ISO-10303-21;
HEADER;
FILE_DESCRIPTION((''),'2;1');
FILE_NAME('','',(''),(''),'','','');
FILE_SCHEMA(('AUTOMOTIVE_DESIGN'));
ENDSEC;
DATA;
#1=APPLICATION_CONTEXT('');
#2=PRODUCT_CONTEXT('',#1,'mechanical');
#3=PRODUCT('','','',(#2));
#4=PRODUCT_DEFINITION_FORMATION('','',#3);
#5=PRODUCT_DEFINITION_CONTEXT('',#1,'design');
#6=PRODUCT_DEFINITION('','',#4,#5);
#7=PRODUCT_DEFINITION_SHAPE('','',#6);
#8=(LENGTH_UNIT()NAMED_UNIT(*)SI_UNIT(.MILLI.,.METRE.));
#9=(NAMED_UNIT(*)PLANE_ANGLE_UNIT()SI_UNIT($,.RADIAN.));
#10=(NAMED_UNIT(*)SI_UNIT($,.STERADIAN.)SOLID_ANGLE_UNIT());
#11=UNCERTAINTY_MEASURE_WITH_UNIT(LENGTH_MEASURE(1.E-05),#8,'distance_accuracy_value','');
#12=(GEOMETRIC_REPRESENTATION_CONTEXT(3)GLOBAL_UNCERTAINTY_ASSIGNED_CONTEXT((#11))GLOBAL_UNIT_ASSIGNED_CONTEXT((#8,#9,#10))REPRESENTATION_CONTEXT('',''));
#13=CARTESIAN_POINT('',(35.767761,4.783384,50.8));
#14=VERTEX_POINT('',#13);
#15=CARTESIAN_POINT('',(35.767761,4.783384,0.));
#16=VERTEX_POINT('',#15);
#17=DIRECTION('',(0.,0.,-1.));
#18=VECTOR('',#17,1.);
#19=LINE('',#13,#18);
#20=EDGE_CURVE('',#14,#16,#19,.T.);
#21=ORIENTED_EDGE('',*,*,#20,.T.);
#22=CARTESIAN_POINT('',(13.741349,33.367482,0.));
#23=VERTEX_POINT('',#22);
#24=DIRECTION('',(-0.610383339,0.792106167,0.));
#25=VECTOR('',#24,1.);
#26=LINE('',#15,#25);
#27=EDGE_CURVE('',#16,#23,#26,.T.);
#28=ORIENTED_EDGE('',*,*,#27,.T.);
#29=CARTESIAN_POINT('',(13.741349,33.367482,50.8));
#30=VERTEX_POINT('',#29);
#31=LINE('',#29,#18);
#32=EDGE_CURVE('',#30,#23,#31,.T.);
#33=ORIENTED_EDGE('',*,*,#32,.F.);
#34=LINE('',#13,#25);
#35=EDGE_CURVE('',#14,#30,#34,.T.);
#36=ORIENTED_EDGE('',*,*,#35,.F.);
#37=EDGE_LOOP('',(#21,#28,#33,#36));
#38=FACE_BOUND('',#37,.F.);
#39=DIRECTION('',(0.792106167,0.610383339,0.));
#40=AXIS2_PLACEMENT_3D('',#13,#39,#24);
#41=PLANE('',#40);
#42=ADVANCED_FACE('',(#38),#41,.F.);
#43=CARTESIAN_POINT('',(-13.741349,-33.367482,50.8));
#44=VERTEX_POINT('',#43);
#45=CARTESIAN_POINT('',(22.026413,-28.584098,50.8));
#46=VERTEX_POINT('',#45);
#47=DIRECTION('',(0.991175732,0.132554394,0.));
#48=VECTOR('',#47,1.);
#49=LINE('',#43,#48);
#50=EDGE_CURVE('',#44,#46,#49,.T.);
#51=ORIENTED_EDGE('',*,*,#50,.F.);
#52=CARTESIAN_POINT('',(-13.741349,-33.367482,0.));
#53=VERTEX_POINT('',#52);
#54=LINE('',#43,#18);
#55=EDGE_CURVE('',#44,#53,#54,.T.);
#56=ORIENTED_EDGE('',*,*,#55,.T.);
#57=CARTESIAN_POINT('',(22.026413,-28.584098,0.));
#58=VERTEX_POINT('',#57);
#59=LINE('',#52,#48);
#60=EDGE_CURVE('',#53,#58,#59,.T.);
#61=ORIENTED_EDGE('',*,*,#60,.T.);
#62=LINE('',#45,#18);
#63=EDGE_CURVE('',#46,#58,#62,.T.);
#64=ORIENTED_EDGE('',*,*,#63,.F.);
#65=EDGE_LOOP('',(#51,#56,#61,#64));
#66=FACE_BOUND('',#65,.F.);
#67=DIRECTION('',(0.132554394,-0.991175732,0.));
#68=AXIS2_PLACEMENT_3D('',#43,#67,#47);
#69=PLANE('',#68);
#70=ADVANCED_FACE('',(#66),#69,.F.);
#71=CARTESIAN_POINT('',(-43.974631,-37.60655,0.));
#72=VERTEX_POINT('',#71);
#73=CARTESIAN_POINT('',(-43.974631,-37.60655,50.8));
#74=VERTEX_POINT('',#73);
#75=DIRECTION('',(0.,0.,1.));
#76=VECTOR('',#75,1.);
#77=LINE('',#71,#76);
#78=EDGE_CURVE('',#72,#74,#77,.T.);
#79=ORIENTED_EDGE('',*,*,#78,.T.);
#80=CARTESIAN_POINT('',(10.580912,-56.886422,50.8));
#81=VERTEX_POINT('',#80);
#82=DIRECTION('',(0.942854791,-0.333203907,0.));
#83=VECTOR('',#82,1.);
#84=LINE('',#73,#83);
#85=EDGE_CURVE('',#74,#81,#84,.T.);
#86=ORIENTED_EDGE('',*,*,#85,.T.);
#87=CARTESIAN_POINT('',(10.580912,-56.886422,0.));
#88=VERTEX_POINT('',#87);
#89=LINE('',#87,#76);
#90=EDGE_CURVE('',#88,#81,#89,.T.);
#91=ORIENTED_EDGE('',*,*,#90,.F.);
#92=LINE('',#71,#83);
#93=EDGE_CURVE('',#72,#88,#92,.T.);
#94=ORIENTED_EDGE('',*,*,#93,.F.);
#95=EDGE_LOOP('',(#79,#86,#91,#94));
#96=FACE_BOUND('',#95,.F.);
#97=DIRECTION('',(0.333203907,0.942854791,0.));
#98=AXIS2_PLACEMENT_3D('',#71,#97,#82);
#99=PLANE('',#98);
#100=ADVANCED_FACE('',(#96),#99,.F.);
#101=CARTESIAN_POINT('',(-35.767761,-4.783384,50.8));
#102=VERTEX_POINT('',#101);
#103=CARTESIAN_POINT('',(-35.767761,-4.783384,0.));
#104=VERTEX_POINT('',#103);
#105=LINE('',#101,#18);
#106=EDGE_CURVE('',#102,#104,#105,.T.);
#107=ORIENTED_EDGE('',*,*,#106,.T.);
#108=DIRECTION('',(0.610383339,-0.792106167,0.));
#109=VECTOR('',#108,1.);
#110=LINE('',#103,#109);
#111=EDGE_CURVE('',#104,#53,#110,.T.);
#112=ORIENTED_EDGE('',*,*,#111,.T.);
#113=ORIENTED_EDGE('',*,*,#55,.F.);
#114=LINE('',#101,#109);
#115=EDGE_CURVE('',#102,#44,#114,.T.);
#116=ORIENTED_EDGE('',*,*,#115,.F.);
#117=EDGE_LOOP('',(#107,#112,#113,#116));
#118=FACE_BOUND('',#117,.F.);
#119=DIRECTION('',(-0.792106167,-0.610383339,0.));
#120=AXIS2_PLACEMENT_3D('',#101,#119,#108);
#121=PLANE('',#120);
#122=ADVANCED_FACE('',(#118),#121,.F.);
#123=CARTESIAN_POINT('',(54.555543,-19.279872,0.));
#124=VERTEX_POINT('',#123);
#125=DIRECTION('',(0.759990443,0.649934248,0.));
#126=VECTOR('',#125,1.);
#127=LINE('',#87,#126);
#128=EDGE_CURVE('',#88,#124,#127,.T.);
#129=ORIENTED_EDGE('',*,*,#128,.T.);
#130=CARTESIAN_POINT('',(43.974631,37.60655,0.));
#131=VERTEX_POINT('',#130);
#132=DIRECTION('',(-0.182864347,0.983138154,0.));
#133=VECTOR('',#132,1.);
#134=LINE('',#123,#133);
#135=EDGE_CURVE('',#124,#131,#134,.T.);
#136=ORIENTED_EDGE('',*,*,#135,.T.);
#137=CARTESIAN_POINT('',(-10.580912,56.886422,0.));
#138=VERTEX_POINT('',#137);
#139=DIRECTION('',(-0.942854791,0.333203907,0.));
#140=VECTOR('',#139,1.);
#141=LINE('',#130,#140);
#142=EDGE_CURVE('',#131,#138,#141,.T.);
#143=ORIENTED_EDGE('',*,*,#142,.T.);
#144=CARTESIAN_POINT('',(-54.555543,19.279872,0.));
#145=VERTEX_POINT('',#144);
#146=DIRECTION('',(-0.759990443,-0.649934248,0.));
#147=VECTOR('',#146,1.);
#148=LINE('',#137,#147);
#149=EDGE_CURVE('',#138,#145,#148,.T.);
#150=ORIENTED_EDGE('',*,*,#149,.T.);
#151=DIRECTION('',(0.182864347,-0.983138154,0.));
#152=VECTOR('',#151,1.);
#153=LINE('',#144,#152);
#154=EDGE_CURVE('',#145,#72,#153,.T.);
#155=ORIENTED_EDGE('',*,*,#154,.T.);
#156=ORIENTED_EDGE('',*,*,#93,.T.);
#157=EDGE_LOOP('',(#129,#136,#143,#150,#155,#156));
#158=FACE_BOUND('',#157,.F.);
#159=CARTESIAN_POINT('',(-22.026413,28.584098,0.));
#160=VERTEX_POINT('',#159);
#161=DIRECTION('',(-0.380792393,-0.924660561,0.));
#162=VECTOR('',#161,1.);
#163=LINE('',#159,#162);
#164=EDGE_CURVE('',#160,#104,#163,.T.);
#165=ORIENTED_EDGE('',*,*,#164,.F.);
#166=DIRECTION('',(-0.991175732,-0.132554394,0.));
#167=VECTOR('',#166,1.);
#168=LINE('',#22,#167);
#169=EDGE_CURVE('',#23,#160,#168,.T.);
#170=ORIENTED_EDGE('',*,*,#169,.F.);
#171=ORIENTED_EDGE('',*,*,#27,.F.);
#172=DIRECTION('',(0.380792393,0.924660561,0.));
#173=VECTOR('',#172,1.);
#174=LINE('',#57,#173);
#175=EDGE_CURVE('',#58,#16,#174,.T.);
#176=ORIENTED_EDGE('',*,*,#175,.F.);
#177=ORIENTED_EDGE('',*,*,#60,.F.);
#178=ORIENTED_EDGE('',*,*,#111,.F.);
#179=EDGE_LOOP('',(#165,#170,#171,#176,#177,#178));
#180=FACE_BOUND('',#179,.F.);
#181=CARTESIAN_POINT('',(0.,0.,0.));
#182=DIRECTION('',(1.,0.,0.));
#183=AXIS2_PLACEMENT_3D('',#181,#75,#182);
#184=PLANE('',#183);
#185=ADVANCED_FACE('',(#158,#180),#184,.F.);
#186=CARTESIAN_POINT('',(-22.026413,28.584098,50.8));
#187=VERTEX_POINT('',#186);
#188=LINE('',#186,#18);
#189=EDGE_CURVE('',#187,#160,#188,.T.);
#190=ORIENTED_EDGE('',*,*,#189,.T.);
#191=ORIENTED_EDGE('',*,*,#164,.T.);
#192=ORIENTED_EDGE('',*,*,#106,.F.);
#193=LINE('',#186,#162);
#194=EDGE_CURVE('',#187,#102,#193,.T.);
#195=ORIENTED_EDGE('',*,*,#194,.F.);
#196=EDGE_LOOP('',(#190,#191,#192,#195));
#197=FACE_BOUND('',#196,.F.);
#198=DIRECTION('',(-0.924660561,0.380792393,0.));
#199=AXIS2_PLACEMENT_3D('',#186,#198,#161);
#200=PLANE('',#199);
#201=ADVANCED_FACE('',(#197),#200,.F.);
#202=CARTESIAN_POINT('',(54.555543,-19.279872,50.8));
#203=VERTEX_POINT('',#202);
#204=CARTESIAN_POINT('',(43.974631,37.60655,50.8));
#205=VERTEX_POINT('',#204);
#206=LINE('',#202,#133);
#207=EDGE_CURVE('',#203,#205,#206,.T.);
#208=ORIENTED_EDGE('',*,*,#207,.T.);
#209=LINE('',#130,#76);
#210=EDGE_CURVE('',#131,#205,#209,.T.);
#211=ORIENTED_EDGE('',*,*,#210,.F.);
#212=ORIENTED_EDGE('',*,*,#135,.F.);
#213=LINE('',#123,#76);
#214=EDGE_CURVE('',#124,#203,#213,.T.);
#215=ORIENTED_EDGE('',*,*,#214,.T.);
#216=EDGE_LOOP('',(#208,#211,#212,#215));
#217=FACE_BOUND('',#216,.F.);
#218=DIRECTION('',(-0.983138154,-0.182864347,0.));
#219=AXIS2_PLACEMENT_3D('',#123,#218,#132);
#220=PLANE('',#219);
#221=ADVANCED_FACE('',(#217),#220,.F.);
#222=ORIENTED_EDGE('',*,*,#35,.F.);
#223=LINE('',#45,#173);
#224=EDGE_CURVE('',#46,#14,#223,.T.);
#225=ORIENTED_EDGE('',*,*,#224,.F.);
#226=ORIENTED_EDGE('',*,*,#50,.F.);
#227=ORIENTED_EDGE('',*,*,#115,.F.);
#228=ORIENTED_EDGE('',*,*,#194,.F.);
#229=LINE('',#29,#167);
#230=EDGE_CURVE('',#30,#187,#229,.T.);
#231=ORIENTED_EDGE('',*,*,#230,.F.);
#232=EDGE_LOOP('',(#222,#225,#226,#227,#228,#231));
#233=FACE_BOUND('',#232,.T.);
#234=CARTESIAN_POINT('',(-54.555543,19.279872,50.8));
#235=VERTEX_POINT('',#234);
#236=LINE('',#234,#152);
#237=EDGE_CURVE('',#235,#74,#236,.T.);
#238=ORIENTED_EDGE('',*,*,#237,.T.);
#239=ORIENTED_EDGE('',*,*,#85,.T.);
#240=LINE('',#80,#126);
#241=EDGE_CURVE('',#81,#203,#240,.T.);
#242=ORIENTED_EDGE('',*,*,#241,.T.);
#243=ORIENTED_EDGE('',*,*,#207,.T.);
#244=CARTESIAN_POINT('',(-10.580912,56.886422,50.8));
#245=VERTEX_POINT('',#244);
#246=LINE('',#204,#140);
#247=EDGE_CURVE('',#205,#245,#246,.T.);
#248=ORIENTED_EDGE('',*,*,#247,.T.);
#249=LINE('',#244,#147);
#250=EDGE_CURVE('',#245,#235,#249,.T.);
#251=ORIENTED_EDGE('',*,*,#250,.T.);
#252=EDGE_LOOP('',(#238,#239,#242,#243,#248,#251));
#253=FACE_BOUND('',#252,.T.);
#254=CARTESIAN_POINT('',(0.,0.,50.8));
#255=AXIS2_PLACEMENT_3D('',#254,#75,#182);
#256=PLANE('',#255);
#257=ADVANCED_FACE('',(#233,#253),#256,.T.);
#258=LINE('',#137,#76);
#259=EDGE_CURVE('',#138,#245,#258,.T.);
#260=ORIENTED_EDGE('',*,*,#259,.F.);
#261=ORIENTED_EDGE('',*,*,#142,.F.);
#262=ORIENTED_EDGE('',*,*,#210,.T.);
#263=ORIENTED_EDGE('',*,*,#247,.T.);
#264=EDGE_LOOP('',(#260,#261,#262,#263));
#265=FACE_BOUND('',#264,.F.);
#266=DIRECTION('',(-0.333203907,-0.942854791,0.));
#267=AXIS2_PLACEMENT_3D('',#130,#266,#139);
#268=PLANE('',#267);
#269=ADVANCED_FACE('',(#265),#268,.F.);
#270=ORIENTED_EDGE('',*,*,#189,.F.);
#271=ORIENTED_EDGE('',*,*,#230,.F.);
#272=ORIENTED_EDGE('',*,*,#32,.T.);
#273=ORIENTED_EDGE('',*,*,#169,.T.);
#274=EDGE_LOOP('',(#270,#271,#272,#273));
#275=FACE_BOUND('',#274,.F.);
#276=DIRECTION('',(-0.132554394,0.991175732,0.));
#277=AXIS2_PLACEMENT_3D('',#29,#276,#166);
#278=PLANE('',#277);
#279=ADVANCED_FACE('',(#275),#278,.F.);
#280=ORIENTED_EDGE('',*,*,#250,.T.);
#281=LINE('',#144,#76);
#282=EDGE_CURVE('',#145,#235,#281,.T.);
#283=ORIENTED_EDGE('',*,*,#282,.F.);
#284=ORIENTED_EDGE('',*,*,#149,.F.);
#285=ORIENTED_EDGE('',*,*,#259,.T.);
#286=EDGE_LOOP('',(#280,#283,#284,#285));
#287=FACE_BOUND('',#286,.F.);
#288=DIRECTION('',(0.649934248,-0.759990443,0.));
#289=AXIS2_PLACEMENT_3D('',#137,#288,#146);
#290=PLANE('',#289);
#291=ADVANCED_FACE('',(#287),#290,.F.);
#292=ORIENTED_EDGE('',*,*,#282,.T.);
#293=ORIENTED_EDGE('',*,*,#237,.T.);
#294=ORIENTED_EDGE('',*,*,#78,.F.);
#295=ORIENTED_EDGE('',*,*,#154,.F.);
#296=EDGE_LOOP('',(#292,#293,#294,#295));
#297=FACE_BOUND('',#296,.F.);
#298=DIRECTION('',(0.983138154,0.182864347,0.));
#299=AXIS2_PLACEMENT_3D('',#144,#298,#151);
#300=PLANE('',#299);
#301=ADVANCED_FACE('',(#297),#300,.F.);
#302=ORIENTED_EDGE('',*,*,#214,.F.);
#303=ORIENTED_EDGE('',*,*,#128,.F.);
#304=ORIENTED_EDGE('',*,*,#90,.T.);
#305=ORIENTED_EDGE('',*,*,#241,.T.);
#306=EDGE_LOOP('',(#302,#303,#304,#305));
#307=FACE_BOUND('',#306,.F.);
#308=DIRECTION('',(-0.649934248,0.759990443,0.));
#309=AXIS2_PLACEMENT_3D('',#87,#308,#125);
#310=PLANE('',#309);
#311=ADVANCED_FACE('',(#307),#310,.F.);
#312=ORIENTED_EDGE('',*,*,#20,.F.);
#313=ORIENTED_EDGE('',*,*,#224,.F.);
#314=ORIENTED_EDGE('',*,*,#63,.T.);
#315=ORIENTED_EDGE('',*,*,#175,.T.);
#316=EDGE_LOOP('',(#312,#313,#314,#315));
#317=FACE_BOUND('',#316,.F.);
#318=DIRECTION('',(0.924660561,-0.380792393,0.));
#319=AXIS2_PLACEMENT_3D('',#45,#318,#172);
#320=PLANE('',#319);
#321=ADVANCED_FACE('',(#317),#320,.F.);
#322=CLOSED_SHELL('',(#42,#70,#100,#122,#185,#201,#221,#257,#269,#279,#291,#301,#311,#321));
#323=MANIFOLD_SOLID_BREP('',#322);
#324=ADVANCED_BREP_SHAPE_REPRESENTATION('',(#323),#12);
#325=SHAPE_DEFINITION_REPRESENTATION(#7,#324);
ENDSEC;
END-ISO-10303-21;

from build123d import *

# Parameters (mm, degrees)
F1_DEPTH = 50.8
F3_DEPTH = 50.8


# Not quite as in the source:
# - a feature names something its author has since deleted; it is built from what else it names


with BuildPart() as f1:
    # F0 (on Top) → F1 (new body)
    with BuildSketch(Plane.XY):
        Polygon((10.580912179, -56.8864221716), (54.5555428205, -19.2798723436), (43.9746306415, 37.606549828), (-10.580912179, 56.8864221716), (-54.5555428205, 19.2798723436), (-43.9746306415, -37.606549828), align=None)
    extrude(amount=F1_DEPTH)

    # F2 (on face) → F3 (cut)
    with BuildSketch(Plane.XY.offset(50.8)):
        Polygon((22.0264125762, -28.5840980822), (35.7677613716, 4.7833838041), (13.7413487954, 33.3674818864), (-22.0264125762, 28.5840980822), (-35.7677613716, -4.7833838041), (-13.7413487954, -33.3674818864), align=None)
    extrude(amount=-F3_DEPTH, mode=Mode.SUBTRACT)


solid = f1.part
